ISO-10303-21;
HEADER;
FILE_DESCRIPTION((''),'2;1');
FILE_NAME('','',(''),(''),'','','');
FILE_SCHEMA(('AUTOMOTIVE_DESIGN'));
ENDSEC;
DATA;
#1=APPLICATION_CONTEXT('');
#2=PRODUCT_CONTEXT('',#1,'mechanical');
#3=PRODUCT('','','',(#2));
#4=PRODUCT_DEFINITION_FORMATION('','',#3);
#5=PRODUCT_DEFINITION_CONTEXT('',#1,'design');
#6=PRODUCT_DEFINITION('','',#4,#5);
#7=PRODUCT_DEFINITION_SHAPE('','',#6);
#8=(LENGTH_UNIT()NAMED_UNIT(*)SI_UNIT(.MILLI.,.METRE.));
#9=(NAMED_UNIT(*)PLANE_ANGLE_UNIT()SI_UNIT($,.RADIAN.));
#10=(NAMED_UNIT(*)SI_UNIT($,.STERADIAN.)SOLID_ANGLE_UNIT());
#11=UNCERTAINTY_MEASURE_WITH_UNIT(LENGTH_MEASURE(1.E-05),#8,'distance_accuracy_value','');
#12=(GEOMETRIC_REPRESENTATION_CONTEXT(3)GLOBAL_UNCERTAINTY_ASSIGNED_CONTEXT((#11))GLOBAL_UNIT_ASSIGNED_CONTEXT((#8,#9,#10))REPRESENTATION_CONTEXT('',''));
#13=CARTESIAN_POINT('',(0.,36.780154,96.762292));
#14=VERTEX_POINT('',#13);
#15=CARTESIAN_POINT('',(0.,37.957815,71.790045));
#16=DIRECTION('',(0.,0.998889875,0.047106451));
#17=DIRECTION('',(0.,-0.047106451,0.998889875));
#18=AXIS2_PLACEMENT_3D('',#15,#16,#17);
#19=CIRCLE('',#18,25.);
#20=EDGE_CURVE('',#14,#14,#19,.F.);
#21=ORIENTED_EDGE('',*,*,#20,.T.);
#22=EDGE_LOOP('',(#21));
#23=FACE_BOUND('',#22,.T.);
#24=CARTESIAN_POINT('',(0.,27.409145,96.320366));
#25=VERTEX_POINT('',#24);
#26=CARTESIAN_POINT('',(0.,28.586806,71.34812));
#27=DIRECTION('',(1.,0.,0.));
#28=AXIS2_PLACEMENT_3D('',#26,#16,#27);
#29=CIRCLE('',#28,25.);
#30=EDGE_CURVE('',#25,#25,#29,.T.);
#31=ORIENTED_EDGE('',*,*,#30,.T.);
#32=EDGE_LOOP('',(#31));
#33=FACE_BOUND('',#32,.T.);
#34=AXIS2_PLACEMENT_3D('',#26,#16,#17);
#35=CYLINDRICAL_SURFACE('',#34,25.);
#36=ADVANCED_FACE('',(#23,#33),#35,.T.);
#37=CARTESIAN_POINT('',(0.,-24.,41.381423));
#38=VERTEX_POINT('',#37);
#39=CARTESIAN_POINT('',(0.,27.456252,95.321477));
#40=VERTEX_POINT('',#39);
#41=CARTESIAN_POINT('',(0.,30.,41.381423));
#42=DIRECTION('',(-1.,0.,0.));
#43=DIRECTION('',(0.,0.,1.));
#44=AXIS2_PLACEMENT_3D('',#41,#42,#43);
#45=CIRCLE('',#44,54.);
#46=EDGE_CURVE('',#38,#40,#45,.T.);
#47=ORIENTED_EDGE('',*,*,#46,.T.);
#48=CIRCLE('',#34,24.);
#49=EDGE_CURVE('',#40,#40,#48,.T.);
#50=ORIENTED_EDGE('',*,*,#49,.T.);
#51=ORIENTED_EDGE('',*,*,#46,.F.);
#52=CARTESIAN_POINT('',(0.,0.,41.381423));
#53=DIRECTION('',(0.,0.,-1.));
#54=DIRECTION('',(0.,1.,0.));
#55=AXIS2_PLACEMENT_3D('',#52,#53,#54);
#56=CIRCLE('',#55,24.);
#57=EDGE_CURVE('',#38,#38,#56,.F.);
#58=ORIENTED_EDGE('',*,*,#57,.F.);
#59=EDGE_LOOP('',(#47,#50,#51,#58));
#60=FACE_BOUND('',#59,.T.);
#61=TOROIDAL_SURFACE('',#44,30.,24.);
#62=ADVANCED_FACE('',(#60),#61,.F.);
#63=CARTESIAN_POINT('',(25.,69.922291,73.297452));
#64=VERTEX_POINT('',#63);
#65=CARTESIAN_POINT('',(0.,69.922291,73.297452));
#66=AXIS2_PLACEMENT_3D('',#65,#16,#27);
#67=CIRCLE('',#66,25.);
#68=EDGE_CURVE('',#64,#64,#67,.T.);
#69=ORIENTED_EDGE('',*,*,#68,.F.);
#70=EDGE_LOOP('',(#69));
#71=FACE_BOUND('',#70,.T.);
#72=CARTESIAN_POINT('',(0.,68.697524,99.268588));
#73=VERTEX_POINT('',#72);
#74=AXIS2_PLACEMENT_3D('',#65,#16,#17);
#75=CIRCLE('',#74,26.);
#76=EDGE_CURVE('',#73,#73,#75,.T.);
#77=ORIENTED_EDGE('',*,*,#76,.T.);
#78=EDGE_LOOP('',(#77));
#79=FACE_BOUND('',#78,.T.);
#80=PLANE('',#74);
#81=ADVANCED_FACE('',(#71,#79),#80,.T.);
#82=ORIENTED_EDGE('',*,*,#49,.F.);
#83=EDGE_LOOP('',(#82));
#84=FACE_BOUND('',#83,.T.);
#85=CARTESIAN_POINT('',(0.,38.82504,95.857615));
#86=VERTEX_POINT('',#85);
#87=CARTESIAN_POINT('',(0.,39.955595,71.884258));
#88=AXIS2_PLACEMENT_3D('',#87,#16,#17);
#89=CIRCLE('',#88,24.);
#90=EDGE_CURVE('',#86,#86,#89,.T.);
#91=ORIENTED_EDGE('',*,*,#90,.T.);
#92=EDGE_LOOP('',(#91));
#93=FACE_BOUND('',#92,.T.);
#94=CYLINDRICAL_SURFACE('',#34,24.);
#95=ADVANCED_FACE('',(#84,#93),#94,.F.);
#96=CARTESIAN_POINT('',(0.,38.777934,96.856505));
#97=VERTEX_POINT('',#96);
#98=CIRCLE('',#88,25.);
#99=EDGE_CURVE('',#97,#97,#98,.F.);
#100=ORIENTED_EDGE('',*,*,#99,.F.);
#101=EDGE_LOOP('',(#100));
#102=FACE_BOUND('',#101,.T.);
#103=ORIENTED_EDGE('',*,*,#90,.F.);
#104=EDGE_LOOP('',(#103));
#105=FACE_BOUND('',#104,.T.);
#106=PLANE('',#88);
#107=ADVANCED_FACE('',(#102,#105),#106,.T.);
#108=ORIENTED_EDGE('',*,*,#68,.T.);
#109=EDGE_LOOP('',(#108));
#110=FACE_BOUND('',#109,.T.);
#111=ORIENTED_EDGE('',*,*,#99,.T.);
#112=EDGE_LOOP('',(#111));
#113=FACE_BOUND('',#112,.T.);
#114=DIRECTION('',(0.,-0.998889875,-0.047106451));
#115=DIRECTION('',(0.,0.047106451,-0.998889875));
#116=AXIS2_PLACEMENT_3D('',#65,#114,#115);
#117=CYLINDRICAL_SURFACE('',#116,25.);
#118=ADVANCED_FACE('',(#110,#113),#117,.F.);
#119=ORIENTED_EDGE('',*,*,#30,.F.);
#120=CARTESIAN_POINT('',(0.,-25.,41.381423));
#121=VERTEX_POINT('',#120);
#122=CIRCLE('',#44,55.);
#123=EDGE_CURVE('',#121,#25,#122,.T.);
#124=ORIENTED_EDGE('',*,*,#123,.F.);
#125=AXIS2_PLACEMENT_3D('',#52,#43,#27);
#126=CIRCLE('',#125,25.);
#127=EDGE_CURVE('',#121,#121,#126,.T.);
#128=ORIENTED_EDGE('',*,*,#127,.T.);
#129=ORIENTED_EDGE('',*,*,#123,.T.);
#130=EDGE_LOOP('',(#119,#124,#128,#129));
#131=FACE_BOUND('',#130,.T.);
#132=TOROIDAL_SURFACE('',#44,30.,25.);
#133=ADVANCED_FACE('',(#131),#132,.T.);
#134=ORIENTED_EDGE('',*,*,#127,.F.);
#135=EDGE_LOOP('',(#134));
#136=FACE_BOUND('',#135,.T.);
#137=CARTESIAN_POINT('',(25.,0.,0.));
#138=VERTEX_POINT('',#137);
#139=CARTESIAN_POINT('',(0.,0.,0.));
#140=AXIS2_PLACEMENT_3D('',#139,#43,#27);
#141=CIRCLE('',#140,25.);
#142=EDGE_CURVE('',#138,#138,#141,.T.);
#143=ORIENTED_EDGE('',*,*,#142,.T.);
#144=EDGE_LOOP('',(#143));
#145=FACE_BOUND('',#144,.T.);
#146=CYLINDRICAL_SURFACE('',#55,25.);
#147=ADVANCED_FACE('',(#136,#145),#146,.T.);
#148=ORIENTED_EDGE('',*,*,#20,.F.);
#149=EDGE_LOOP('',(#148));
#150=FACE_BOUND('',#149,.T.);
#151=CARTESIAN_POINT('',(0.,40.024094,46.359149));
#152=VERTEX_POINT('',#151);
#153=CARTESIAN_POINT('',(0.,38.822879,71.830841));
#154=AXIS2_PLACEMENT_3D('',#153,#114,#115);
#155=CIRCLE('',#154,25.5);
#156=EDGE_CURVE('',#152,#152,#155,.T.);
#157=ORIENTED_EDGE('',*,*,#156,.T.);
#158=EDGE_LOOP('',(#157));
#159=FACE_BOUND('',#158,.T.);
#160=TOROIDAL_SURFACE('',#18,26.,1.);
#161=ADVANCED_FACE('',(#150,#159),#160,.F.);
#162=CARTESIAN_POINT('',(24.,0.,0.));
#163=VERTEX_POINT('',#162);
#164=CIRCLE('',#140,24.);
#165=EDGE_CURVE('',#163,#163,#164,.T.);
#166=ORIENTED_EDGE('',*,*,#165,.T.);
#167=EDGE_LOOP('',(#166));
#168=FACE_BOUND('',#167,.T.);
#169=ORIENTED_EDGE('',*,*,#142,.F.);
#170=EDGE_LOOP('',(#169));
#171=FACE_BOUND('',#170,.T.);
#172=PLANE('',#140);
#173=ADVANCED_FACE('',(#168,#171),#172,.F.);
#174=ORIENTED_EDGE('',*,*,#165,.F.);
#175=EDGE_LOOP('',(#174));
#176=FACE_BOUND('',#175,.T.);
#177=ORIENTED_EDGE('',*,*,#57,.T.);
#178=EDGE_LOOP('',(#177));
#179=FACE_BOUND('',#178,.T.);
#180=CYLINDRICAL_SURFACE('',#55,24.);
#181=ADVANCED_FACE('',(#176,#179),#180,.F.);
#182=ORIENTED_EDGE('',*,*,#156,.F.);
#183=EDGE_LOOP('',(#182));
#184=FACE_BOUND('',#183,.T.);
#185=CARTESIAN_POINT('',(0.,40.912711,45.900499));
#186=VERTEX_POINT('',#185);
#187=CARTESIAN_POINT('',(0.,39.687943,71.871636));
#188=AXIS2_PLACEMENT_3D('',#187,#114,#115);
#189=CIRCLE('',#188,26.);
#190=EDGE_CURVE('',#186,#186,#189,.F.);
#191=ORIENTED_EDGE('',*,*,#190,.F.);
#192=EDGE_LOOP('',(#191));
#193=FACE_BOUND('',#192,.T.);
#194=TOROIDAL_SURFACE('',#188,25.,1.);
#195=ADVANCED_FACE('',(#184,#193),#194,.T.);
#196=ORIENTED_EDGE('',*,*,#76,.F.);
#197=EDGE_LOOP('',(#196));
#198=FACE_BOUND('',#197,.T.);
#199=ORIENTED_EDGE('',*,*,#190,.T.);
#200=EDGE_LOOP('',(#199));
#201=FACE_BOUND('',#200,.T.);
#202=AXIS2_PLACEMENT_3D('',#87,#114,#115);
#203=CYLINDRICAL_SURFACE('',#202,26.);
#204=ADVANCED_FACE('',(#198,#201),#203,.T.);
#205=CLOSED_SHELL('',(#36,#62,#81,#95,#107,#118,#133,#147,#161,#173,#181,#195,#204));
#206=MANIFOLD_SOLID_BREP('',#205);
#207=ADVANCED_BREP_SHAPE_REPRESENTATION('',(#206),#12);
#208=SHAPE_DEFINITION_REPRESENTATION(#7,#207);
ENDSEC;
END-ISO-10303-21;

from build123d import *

# Parameters (mm, degrees)
ESQUISSE6_R        = 25
ESQUISSE6_R_2      = 24
ESQUISSE8_R        = 26.000000000000007
ESQUISSE8_R_2      = 24.000000000000007
EXTRU_MINCE1_DEPTH = 1
EXTRU_MINCE2_START = 30
ESQUISSE9_R        = 26
ESQUISSE9_R_2      = 25
EXTRU_MINCE2_DEPTH = 30
CONG_1_R           = 1
CONG_2_R           = 1


with BuildPart() as part:
    # Balayage-Mince2: sweep along a path in Esquisse7
    with BuildLine(Plane(origin=(0, 0, 0), x_dir=(0, 0, -1), z_dir=(1, 0, 0))) as balayage_mince2_path:
        Line((0, 0), (-41.38142332276701, -3.47e-15))
        ThreePointArc((-41.38142332276701, -3.47e-15), (-62.08896052980016, 8.292906624346546), (-71.34811957162613, 28.58680647871081))
        Line((-71.34811957162613, 28.58680647871081), (-71.83715157767594, 38.95670512351683))
    # Esquisse6 → Balayage-Mince2 (sweep)
    with BuildSketch(Plane.XY):
        Circle(ESQUISSE6_R)
        Circle(ESQUISSE6_R_2, mode=Mode.SUBTRACT)
    sweep(path=balayage_mince2_path.line)



with BuildPart() as body_2:
    # Esquisse8 → Extru.-Mince1 (new body)
    with BuildSketch(Plane(origin=(0, 42.25049608966464, 1.9924828165681323), x_dir=(1, 0, 0), z_dir=(0, 0.9988898749619701, 0.047106450709639855))):
        with Locations((0, -69.92229124733788)):
            Circle(ESQUISSE8_R)
        with Locations((0, -69.92229124733788)):
            Circle(ESQUISSE8_R_2, mode=Mode.SUBTRACT)
    extrude(amount=EXTRU_MINCE1_DEPTH)


with BuildPart() as part_1:
    add(part.part)

    add(body_2.part)  # Extru.-Mince2 merges body 2
    # Esquisse9 → Extru.-Mince2 (add)
    with BuildSketch(Plane(origin=(0, 43.249385964626626, 2.039589267277776), x_dir=(1, 0, 0), z_dir=(0, 0.9988898749619701, 0.04710645070963987)).offset(EXTRU_MINCE2_START)):
        with Locations((0, -69.92229124733788)):
            Circle(ESQUISSE9_R)
        with Locations((0, -69.92229124733788)):
            Circle(ESQUISSE9_R_2, mode=Mode.SUBTRACT)
    extrude(amount=-EXTRU_MINCE2_DEPTH)

    # Congé1
    cong_1_edges = [part_1.edges().sort_by_distance(p)[0] for p in [
        (-25, 38.95670512351683, 71.8371515776759),
    ]]
    fillet(cong_1_edges, radius=CONG_1_R - 0.0001)  # a hair under: the kernel refuses the full size

    # Congé2
    cong_2_edges = [part_1.edges().sort_by_distance(p)[0] for p in [
        (-26.000000000000007, 38.956705123516834, 71.83715157767593),
    ]]
    fillet(cong_2_edges, radius=CONG_2_R)


solid = part_1.part
